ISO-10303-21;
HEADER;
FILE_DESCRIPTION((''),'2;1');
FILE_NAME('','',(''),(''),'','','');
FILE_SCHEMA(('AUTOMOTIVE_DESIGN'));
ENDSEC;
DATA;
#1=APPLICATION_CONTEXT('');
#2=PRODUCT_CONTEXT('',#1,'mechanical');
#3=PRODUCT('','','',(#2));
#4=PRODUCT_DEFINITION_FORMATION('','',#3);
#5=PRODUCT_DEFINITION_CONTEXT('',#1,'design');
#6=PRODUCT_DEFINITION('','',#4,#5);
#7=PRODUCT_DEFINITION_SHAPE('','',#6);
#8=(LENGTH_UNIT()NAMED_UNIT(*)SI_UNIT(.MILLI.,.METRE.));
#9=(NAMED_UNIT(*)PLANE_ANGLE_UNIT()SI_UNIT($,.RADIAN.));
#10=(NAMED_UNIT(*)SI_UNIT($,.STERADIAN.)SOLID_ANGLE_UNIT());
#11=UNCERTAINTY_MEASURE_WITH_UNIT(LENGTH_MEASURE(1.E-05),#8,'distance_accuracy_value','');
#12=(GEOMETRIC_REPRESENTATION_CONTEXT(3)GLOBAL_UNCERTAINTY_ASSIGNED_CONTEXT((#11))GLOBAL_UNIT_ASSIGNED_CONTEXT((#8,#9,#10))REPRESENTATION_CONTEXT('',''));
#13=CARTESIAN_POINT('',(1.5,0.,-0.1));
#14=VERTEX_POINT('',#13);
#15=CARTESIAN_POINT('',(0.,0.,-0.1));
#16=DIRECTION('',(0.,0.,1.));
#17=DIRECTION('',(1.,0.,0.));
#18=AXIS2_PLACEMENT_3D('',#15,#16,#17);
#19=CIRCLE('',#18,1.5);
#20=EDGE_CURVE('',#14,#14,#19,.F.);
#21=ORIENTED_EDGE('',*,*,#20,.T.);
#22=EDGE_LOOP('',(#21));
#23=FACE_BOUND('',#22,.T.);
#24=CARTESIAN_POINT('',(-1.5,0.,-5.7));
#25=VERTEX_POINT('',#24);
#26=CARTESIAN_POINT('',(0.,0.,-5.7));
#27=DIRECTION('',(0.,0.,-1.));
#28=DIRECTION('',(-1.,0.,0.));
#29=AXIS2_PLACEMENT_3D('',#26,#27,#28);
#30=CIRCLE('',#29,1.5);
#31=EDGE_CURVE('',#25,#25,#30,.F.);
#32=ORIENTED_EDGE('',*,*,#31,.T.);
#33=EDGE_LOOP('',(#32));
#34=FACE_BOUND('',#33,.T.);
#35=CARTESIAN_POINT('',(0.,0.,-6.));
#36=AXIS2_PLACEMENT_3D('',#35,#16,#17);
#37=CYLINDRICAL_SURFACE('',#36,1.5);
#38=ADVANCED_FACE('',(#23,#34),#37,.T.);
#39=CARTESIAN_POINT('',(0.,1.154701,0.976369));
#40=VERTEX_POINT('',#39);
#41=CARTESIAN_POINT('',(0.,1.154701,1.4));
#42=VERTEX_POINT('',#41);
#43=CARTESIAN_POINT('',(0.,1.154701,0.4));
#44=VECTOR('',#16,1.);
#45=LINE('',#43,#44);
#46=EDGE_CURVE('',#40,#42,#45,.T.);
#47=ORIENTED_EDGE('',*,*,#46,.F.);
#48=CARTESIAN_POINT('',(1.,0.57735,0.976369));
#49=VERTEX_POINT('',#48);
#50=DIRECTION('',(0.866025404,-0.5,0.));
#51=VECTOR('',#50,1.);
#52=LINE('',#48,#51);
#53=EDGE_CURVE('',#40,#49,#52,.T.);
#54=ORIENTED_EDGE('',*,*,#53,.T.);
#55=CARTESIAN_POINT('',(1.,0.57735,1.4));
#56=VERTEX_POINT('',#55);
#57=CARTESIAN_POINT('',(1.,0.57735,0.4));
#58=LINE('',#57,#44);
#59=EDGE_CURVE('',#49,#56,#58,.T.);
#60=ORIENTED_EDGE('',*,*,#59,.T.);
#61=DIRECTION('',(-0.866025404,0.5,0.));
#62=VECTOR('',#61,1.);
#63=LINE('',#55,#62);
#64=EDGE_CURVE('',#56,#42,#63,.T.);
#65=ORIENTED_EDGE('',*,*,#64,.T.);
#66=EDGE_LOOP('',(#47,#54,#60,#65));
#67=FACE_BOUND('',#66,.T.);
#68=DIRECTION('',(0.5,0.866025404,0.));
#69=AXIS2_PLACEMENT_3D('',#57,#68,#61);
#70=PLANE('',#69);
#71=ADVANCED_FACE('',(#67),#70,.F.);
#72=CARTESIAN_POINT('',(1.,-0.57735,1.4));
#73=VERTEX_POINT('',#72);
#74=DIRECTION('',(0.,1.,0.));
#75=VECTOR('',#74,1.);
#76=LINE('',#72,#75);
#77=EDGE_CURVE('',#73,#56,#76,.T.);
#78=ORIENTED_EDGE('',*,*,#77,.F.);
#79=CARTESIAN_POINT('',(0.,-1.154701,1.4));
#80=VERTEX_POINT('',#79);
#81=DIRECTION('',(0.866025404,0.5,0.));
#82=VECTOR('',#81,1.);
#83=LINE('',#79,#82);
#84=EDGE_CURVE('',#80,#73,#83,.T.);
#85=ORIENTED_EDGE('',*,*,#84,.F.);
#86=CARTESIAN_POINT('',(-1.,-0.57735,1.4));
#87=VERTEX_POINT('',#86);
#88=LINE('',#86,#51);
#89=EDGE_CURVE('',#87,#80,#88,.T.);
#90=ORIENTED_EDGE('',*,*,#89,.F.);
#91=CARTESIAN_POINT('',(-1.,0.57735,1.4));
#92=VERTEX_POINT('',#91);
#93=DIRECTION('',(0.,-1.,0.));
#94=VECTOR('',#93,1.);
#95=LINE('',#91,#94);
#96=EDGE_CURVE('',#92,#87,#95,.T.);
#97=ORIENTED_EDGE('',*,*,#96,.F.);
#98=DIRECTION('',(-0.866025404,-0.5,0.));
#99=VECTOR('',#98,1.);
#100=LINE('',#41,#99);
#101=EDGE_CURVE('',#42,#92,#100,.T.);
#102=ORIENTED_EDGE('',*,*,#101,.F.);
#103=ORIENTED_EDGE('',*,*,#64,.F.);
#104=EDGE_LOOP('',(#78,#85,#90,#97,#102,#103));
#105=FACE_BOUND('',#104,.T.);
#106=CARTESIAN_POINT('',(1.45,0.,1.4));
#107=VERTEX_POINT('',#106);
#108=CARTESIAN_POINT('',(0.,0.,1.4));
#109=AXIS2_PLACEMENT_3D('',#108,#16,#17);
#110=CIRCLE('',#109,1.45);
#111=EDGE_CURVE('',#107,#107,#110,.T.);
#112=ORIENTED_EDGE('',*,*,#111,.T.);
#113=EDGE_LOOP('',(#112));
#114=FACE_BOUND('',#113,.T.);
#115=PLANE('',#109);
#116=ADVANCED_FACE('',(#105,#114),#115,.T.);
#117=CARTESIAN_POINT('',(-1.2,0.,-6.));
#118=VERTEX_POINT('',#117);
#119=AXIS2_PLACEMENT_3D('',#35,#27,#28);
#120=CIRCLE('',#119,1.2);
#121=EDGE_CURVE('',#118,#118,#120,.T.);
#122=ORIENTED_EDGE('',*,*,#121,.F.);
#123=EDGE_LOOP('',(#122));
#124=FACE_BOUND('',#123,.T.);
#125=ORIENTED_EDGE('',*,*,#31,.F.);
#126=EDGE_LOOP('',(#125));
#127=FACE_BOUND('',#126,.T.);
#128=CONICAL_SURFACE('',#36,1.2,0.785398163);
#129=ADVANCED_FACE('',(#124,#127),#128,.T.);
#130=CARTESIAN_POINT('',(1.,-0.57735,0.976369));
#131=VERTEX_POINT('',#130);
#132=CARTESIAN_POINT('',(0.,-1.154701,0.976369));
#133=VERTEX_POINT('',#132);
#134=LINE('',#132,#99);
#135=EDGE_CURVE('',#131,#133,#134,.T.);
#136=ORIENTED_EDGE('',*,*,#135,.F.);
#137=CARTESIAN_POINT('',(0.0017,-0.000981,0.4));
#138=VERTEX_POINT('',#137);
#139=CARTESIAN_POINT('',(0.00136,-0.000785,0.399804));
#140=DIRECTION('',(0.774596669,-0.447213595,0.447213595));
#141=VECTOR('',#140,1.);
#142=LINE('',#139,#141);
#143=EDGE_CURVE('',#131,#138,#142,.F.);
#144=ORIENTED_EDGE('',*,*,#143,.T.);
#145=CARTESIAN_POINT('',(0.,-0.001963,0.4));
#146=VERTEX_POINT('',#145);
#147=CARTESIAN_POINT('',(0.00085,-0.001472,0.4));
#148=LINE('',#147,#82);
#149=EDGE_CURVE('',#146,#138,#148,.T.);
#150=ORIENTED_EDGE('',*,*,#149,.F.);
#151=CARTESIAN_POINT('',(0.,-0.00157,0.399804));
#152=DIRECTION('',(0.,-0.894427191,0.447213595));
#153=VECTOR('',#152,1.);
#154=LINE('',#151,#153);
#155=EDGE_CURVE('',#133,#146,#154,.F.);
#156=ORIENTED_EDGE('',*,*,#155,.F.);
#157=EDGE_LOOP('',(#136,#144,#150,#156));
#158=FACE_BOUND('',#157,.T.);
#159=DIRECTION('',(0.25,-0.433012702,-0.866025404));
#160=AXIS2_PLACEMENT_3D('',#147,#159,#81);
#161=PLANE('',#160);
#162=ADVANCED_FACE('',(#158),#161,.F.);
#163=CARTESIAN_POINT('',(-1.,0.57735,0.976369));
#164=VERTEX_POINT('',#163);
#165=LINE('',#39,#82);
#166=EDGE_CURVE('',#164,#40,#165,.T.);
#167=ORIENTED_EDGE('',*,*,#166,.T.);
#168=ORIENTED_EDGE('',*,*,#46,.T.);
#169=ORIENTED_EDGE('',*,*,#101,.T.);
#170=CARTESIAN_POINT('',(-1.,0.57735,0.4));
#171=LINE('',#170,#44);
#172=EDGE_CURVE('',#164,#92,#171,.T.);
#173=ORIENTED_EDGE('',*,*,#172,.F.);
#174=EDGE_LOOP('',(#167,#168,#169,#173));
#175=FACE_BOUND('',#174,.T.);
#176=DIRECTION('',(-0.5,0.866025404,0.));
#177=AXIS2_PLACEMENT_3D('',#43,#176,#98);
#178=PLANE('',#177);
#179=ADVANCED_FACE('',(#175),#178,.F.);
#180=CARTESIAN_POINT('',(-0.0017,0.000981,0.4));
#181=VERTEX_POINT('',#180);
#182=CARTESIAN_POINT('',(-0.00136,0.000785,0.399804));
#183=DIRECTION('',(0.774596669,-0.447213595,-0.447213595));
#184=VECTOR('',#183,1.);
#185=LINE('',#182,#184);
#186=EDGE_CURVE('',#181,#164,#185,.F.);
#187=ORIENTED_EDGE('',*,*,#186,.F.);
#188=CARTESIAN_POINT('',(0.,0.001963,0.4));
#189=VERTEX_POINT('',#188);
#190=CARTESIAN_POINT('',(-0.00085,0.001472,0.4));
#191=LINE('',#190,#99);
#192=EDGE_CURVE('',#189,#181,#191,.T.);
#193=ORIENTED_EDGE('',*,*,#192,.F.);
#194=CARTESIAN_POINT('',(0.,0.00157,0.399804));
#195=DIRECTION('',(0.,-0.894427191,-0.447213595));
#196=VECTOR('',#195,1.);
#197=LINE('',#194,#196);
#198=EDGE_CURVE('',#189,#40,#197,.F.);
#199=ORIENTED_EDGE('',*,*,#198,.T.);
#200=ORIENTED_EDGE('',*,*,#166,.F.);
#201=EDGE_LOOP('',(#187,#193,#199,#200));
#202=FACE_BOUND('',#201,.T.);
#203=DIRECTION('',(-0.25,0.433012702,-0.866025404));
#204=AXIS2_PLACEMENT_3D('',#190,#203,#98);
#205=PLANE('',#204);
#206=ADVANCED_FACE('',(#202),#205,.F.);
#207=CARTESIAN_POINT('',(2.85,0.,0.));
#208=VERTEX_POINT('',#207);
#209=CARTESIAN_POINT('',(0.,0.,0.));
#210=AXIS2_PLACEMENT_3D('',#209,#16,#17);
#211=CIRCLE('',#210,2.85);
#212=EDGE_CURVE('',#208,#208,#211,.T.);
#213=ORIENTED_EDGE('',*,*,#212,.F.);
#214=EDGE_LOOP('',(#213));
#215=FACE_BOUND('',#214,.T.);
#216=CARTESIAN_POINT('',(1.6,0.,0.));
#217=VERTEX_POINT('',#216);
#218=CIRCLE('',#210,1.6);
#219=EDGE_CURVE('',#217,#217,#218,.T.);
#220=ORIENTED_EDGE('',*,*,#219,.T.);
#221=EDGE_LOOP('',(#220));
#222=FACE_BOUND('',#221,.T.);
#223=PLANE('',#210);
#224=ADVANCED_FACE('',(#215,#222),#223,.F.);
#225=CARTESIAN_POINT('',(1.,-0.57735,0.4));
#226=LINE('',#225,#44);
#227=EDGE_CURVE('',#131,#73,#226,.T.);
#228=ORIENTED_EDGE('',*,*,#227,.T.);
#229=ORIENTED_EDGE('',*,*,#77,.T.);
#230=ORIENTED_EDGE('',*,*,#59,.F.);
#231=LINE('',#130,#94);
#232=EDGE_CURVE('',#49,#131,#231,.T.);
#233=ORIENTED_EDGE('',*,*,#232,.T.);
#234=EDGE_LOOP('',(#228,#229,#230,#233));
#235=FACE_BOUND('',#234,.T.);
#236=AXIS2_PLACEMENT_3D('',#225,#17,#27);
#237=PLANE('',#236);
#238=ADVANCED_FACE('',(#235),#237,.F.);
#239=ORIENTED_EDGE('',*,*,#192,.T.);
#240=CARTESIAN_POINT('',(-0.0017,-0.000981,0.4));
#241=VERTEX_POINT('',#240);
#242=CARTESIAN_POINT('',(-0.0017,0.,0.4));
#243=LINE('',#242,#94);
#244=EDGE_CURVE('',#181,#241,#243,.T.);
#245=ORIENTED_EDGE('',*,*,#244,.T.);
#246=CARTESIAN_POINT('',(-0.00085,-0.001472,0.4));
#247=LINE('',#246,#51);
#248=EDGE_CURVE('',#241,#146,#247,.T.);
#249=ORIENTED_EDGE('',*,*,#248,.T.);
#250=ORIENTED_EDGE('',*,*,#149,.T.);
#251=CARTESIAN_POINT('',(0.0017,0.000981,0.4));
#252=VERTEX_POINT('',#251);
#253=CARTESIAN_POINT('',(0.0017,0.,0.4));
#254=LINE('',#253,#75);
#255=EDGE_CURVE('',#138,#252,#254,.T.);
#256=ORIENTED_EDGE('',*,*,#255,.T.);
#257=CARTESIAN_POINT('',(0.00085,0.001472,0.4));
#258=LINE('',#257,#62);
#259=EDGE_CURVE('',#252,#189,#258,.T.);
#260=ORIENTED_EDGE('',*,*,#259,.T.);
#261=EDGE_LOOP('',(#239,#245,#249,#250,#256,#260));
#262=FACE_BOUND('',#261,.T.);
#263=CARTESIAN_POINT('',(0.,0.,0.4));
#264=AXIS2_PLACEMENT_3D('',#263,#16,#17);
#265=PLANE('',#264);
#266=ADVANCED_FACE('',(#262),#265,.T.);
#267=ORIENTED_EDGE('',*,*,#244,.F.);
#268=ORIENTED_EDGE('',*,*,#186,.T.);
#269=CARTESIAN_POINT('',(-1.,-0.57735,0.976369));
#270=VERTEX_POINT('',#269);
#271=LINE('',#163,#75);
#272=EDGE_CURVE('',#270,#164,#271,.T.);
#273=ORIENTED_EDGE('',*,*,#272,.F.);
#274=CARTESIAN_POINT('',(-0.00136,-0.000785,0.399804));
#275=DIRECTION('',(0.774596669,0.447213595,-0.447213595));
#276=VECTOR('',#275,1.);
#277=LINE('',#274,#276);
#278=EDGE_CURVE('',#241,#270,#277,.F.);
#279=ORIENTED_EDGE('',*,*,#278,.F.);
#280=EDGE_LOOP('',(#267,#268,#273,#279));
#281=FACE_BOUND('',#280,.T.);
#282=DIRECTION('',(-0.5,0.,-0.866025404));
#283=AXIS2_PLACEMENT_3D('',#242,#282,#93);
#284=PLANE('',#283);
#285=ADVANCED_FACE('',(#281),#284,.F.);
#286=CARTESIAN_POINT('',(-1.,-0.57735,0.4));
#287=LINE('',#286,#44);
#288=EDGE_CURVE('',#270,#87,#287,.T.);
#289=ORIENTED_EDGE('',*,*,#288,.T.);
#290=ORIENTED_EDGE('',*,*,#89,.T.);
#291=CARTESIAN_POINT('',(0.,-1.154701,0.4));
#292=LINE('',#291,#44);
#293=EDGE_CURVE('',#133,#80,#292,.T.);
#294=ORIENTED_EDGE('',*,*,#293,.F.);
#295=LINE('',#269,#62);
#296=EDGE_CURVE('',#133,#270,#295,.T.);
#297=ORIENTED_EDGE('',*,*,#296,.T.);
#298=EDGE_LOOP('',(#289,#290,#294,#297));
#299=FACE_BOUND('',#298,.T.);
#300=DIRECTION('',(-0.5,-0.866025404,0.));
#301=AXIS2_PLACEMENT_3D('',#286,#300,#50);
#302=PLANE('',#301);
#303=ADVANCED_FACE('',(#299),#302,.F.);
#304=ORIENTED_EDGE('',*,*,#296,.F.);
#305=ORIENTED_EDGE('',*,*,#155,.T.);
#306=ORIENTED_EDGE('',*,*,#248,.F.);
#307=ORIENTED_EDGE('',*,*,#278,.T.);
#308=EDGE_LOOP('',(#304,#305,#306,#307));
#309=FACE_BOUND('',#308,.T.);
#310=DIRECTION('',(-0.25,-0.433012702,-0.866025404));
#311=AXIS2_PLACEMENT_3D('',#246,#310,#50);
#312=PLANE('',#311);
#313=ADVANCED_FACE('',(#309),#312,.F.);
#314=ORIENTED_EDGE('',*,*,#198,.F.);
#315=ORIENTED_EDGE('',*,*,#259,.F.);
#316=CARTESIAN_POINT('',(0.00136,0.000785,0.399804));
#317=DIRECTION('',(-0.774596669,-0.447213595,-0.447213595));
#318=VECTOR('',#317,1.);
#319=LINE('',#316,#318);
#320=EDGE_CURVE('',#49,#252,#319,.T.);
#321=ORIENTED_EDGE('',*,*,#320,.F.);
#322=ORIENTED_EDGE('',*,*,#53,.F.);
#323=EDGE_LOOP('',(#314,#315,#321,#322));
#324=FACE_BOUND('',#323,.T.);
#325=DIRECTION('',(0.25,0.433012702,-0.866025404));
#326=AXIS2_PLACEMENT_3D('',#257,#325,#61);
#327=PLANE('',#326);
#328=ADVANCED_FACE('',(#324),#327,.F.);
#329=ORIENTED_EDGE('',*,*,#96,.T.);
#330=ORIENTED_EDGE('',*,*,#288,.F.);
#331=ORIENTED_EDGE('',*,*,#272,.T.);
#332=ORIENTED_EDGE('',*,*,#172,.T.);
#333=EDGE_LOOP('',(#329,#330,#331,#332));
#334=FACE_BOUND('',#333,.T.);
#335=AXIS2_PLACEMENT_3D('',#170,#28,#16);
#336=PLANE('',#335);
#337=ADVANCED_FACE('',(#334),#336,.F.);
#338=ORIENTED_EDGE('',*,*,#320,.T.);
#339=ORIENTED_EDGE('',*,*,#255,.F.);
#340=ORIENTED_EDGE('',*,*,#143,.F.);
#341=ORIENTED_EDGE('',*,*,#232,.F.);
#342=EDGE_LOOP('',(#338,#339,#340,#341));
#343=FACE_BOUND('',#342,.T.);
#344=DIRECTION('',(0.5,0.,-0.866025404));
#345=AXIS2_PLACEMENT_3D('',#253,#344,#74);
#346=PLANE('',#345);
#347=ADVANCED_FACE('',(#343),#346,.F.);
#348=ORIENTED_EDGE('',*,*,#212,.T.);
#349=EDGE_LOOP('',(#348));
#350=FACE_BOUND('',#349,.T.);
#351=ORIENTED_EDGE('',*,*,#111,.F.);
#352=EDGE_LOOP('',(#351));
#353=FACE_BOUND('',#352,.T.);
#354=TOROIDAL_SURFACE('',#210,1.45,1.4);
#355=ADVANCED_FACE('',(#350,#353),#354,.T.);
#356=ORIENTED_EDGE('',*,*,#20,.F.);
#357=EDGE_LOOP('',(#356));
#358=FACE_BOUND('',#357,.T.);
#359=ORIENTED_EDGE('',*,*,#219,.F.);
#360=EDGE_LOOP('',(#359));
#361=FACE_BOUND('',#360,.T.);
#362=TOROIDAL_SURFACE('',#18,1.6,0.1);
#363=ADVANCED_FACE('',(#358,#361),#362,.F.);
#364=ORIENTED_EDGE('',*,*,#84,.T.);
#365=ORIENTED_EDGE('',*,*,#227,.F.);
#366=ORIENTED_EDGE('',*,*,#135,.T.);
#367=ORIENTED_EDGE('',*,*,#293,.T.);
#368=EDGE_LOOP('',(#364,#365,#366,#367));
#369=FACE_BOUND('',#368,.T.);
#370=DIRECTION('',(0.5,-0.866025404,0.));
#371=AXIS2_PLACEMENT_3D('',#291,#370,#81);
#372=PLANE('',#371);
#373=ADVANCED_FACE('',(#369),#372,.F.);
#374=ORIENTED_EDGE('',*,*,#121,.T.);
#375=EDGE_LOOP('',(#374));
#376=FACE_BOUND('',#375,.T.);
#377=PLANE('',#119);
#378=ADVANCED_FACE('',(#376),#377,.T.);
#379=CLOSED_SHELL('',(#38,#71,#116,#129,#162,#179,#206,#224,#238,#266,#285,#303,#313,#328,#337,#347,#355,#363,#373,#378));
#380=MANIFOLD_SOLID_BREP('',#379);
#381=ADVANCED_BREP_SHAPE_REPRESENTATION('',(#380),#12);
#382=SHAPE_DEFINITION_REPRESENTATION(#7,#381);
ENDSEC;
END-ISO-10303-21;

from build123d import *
from OCP.BRepFilletAPI import BRepFilletAPI_MakeChamfer

# Parameters (mm, degrees)
SKETCH_1_R          = 2.85
EXTRUDE_1_DEPTH     = 1.4
FILLET_1_R          = 1.4
SKETCH_3_R          = 1.5
EXTRUDE_3_DEPTH     = 6
CUT_EXTRUDE_1_DEPTH = 1
CHAMFER_2_SIZE      = 0.3
CHAMFER_3_SIZE      = 0.576368876
CHAMFER_3_SIZE2     = 0.998300177
FILLET_2_R          = 0.1


with BuildPart() as part:
    # 草图1 → 凸台-拉伸1 (new body)
    with BuildSketch(Plane.XY):
        Circle(SKETCH_1_R)
    extrude(amount=EXTRUDE_1_DEPTH)

    # 圆角1
    fillet_1_edges = [part.edges().sort_by_distance(p)[0] for p in [
        (-2.85, 0, 1.4),
    ]]
    fillet(fillet_1_edges, radius=FILLET_1_R - 0.0001)  # a hair under: the kernel refuses the full size

    # 草图3 → 凸台-拉伸3 (add)
    with BuildSketch(Plane(origin=(0, 0, 0), x_dir=(-1, 0, 0), z_dir=(0, 0, -1))):
        with Locations(Location((0, 0, 0), (0, 0, 180))):
            Circle(SKETCH_3_R)
    extrude(amount=EXTRUDE_3_DEPTH)

    # 草图4 → 切除-拉伸1 (cut)
    with BuildSketch(Plane.XY.offset(1.4)):
        Polygon((1, 0.577350269), (0, 1.154700538), (-1, 0.577350269), (-1, -0.577350269), (0, -1.154700538), (1, -0.577350269), align=None)
    extrude(amount=-CUT_EXTRUDE_1_DEPTH, mode=Mode.SUBTRACT)

    # 倒角2
    chamfer_2_edges = [part.edges().sort_by_distance(p)[0] for p in [
        (-1.5, 0, -6),
    ]]
    chamfer(chamfer_2_edges, length=CHAMFER_2_SIZE)

    # 倒角3: one chamfer whose edges measure the first distance from different faces: ONE call of the kernel's chamfer builder (chamfer() names one face for all edges)
    chamfer_3_edges_1 = [part.edges().sort_by_distance(p)[0] for p in [
        (1, 0, 0.4),
    ]]
    chamfer_3_side_1 = [part.faces().sort_by_distance(p)[0] for p in [
        (1, 0, 0.9),
    ]]
    chamfer_3_edges_2 = [part.edges().sort_by_distance(p)[0] for p in [
        (0.5, -0.866025404, 0.4),
    ]]
    chamfer_3_side_2 = [part.faces().sort_by_distance(p)[0] for p in [
        (0.5, -0.866025404, 0.9),
    ]]
    chamfer_3_edges_3 = [part.edges().sort_by_distance(p)[0] for p in [
        (-0.5, -0.866025404, 0.4),
    ]]
    chamfer_3_side_3 = [part.faces().sort_by_distance(p)[0] for p in [
        (-0.5, -0.866025404, 0.9),
    ]]
    chamfer_3_edges_4 = [part.edges().sort_by_distance(p)[0] for p in [
        (-1, 0, 0.4),
    ]]
    chamfer_3_side_4 = [part.faces().sort_by_distance(p)[0] for p in [
        (-1, 0, 0.9),
    ]]
    chamfer_3_edges_5 = [part.edges().sort_by_distance(p)[0] for p in [
        (-0.5, 0.866025404, 0.4),
    ]]
    chamfer_3_side_5 = [part.faces().sort_by_distance(p)[0] for p in [
        (-0.5, 0.866025404, 0.9),
    ]]
    chamfer_3_edges_6 = [part.edges().sort_by_distance(p)[0] for p in [
        (0.5, 0.866025404, 0.4),
    ]]
    chamfer_3_side_6 = [part.faces().sort_by_distance(p)[0] for p in [
        (0.5, 0.866025404, 0.9),
    ]]
    chamfer_3 = BRepFilletAPI_MakeChamfer(part.part.solid().wrapped)
    for e in chamfer_3_edges_1:
        chamfer_3.Add(CHAMFER_3_SIZE, CHAMFER_3_SIZE2, e.wrapped, chamfer_3_side_1[0].wrapped)  # the first distance lies on this face
    for e in chamfer_3_edges_2:
        chamfer_3.Add(CHAMFER_3_SIZE, CHAMFER_3_SIZE2, e.wrapped, chamfer_3_side_2[0].wrapped)  # the first distance lies on this face
    for e in chamfer_3_edges_3:
        chamfer_3.Add(CHAMFER_3_SIZE, CHAMFER_3_SIZE2, e.wrapped, chamfer_3_side_3[0].wrapped)  # the first distance lies on this face
    for e in chamfer_3_edges_4:
        chamfer_3.Add(CHAMFER_3_SIZE, CHAMFER_3_SIZE2, e.wrapped, chamfer_3_side_4[0].wrapped)  # the first distance lies on this face
    for e in chamfer_3_edges_5:
        chamfer_3.Add(CHAMFER_3_SIZE, CHAMFER_3_SIZE2, e.wrapped, chamfer_3_side_5[0].wrapped)  # the first distance lies on this face
    for e in chamfer_3_edges_6:
        chamfer_3.Add(CHAMFER_3_SIZE, CHAMFER_3_SIZE2, e.wrapped, chamfer_3_side_6[0].wrapped)  # the first distance lies on this face
    add(Compound.cast(chamfer_3.Shape()), mode=Mode.REPLACE)

    # 圆角2
    fillet_2_edges = [part.edges().sort_by_distance(p)[0] for p in [
        (-1.5, 0, 0),
    ]]
    fillet(fillet_2_edges, radius=FILLET_2_R)


solid = part.part
